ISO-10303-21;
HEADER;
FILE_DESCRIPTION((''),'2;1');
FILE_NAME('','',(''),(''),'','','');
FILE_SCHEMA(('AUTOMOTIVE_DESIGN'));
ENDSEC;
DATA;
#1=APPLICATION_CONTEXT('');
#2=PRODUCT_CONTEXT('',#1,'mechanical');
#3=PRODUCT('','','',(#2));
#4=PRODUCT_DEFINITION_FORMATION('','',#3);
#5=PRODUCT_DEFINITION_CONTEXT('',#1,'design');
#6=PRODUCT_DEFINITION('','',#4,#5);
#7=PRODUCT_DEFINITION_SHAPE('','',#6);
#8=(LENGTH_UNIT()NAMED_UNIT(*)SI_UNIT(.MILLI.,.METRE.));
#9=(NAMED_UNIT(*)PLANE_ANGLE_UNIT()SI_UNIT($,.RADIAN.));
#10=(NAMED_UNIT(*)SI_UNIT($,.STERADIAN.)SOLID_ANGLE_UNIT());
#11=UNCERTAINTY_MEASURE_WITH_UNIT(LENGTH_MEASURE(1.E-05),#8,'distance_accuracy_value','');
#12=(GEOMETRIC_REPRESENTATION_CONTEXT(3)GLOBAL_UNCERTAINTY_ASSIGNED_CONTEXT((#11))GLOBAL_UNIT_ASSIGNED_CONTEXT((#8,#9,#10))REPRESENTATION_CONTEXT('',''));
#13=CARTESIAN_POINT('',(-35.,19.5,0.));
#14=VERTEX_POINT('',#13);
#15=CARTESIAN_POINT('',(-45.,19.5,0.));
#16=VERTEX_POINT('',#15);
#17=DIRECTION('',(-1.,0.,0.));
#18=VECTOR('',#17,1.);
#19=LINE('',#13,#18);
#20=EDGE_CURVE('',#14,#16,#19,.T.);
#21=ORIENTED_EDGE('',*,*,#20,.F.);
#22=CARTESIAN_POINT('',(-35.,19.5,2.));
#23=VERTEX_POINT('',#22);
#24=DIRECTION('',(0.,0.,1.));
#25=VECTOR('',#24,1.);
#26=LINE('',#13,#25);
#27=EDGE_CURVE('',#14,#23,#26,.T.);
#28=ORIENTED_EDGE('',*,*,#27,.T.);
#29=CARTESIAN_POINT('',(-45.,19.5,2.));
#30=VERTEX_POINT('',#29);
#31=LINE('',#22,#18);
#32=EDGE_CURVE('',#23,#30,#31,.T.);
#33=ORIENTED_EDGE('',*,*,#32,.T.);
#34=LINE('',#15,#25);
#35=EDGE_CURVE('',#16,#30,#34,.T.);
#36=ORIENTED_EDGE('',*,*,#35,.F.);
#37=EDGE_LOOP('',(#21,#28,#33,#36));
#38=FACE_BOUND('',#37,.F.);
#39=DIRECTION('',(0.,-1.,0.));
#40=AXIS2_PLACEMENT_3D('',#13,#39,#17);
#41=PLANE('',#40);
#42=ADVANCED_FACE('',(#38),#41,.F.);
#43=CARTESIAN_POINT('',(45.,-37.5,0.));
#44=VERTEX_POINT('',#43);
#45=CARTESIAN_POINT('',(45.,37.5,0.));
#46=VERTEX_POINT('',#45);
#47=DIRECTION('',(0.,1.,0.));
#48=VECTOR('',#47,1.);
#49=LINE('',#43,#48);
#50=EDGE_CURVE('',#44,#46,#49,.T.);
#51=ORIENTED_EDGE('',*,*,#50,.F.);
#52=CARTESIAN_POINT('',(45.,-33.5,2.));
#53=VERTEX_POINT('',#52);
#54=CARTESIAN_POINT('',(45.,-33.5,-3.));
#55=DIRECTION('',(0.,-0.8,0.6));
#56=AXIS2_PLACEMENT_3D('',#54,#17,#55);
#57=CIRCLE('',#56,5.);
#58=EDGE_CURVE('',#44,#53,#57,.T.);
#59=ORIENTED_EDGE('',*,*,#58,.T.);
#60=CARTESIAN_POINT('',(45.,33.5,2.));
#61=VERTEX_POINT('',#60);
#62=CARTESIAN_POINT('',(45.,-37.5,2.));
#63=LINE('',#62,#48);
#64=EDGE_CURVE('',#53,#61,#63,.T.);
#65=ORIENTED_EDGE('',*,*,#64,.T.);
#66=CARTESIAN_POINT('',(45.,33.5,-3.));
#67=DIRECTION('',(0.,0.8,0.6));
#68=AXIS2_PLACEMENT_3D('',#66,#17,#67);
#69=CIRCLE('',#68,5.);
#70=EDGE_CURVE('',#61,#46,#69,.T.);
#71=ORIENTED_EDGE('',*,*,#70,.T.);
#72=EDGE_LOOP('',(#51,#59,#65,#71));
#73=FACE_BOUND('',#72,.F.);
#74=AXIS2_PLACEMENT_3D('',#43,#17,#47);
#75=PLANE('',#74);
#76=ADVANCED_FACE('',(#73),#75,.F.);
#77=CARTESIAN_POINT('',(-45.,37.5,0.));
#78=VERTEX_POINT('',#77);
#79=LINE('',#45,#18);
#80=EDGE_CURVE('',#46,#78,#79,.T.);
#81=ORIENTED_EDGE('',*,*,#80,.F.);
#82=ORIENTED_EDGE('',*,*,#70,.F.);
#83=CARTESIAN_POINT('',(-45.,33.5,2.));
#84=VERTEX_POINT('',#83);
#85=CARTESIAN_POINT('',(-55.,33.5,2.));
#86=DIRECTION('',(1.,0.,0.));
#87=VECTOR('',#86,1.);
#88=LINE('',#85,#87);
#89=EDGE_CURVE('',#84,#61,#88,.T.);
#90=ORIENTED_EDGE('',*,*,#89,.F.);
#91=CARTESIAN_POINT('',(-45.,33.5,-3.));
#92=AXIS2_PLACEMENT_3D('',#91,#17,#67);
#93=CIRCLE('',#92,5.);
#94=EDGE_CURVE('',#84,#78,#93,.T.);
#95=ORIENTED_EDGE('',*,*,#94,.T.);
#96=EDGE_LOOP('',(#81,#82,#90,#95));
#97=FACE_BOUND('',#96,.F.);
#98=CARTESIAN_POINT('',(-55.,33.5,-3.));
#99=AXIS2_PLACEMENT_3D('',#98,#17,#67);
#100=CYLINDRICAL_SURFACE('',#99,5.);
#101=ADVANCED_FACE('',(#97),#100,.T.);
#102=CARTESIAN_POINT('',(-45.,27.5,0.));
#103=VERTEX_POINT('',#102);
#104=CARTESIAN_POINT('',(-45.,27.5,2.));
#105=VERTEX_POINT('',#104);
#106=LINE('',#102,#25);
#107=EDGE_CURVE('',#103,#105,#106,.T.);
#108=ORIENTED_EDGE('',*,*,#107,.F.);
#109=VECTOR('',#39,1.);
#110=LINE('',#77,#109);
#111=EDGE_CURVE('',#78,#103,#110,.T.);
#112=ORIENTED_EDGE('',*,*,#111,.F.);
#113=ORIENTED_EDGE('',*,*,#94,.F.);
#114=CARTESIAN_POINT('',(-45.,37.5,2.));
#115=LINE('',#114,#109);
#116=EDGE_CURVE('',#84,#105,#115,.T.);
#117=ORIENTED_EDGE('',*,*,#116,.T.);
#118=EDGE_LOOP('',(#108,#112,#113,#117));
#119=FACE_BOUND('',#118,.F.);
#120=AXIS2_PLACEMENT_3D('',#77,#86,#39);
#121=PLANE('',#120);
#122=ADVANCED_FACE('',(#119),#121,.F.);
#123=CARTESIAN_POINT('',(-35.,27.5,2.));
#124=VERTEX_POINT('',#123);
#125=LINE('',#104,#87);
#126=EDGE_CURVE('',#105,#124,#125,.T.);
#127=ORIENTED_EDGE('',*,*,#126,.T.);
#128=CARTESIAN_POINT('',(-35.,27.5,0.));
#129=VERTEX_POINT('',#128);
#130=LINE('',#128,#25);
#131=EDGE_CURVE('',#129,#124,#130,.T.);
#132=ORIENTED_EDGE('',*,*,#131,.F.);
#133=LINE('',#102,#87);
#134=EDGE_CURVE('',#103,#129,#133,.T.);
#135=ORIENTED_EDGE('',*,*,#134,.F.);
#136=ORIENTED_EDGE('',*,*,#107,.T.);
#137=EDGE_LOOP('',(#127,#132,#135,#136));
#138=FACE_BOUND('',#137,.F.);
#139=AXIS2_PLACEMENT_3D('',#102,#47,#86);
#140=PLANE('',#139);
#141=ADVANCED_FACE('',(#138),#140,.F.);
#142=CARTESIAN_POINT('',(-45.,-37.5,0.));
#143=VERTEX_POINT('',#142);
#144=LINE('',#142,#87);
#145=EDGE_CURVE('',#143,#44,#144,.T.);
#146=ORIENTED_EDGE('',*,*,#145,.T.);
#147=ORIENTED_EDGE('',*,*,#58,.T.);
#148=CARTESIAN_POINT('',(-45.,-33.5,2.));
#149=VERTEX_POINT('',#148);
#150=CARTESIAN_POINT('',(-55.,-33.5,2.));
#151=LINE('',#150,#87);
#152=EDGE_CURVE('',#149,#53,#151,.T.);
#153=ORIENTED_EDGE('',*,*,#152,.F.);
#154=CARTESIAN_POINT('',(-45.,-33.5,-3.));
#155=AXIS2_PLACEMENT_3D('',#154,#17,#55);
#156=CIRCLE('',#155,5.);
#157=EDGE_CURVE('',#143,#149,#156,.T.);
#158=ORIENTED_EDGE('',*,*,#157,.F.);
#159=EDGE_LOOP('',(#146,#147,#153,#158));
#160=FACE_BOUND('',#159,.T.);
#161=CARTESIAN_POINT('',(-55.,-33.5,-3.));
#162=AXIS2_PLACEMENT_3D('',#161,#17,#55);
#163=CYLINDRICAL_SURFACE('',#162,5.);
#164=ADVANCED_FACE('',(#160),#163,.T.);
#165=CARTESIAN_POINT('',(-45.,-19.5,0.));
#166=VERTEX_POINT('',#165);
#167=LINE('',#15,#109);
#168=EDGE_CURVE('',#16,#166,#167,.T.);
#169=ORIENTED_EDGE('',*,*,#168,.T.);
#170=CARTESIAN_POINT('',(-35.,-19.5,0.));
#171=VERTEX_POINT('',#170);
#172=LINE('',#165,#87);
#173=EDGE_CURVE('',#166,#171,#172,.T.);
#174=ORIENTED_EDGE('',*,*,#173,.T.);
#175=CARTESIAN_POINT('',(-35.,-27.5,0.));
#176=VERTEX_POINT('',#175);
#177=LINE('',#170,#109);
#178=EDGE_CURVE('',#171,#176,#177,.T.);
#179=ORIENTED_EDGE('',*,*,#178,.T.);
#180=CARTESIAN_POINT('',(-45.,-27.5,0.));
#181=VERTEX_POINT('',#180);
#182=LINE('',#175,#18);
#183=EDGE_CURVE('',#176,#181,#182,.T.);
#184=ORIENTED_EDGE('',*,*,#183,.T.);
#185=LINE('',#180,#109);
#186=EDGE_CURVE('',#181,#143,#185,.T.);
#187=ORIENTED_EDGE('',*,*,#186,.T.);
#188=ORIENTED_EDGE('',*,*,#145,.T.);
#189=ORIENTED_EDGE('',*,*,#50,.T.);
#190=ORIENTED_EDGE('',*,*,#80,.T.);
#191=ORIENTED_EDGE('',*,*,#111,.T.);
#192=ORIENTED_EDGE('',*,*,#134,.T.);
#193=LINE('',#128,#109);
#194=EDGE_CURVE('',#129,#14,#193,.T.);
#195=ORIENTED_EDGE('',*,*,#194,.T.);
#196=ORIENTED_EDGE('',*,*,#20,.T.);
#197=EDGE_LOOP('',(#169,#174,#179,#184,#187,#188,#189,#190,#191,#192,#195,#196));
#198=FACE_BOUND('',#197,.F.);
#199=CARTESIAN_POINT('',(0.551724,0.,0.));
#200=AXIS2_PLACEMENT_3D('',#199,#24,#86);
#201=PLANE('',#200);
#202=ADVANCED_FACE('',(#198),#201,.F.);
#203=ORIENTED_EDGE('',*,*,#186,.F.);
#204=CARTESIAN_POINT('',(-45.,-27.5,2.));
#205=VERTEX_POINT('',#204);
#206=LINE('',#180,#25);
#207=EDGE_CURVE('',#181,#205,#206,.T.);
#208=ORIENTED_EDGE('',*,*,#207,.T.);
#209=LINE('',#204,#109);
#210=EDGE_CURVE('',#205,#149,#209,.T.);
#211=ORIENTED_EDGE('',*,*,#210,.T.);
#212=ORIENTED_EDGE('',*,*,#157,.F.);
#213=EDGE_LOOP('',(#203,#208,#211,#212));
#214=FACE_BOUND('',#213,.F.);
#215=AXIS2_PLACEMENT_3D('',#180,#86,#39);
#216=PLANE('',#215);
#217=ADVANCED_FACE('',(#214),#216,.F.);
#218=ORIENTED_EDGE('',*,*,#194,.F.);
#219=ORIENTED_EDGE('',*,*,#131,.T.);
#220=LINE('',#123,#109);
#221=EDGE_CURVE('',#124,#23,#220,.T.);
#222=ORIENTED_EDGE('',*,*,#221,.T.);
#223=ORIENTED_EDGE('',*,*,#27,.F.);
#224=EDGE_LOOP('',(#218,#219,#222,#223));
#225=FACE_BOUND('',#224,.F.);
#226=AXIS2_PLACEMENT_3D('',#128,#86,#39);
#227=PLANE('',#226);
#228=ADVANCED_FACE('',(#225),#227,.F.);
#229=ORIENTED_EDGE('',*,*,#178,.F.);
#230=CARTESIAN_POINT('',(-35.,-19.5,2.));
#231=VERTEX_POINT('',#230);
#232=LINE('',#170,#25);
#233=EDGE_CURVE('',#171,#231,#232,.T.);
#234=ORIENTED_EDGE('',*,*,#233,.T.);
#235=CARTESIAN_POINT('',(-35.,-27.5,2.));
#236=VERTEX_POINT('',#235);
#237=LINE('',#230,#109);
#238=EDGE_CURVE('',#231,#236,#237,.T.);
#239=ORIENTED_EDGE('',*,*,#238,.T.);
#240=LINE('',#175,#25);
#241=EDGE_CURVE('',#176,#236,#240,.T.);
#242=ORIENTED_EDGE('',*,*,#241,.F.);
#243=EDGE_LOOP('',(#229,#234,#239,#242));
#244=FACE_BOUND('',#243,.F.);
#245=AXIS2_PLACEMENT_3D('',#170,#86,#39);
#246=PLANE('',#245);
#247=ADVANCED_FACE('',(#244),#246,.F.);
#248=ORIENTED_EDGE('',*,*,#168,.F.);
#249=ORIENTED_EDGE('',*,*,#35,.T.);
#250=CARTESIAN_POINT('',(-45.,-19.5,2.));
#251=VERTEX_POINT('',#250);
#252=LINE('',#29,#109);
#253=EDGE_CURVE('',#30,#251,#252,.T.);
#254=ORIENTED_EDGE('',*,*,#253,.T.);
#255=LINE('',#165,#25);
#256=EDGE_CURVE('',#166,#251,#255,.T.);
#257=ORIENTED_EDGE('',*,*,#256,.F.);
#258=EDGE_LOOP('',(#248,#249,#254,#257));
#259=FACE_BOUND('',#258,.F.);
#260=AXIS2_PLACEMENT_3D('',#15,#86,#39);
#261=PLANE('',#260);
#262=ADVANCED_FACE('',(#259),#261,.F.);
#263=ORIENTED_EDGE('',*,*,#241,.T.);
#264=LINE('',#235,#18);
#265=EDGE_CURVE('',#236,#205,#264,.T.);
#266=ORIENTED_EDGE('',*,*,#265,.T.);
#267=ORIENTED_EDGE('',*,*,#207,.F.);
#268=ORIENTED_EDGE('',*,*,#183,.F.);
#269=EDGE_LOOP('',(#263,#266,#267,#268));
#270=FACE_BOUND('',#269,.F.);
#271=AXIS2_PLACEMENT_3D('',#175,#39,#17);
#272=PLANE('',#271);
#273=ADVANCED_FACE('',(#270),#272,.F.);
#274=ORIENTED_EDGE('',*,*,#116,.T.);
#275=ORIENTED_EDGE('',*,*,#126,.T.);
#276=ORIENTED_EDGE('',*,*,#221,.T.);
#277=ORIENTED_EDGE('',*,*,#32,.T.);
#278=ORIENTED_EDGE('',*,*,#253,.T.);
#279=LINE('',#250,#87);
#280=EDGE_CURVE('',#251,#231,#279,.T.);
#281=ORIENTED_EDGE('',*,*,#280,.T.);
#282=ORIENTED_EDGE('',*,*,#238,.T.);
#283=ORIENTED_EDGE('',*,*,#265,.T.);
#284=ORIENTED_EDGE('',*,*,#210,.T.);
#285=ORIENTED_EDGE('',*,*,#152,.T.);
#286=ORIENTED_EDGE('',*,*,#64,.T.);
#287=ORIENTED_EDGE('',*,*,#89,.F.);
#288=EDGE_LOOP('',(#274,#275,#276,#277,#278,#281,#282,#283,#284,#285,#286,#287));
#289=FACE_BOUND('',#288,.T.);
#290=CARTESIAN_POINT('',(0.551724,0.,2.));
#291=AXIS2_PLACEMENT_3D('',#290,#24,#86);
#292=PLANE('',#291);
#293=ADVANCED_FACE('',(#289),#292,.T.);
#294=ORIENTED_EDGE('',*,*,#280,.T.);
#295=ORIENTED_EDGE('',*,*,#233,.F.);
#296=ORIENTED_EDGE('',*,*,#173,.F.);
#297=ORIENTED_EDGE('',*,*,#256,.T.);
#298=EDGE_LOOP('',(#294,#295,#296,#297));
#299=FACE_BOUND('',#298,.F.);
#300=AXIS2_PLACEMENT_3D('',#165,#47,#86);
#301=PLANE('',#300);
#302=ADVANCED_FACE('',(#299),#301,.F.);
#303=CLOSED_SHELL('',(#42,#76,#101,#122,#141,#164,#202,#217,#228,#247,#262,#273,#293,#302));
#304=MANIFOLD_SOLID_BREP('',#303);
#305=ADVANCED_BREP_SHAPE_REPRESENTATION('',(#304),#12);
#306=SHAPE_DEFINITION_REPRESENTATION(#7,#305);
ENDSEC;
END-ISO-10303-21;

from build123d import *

# Parameters (mm, degrees)
F1_DEPTH    = 2
F2_T1_DEPTH = 110


# Not quite as in the source:
# - a fillet or chamfer that OpenCascade refuses, or shapes differently, is made with other operations: its cross-section is extruded or revolved along the edge and cut away or added


with BuildPart() as f1:
    # F0 (on Top) → F1 (new body)
    with BuildSketch(Plane.XY):
        Polygon((45, 27.5), (-35, 27.5), (-35, 19.5), (-45, 19.5), (-45, -19.5), (-35, -19.5), (-35, -27.5), (45, -27.5), align=None)
        Polygon((-45, 37.5), (-45, 27.5), (-35, 27.5), (45, 27.5), (45, 37.5), align=None)
        Polygon((45, -37.5), (45, -27.5), (-35, -27.5), (-45, -27.5), (-45, -37.5), align=None)
    extrude(amount=F1_DEPTH)

    # F2: fillet of radius 5 on 2 edges, made by hand

    # F2_s2 → F2_t1 (cut)
    with BuildSketch(Plane.YZ.offset(-55)):
        with BuildLine():
            ThreePointArc((37.5, 0), (35.7360679775, 1.472135955), (33.5, 2))
            Line((33.5, 2), (37.5, 2))
            Line((37.5, 2), (37.5, 0))
        make_face()
        with BuildLine():
            ThreePointArc((-37.5, 0), (-35.7360679775, 1.472135955), (-33.5, 2))
            Line((-33.5, 2), (-37.5, 2))
            Line((-37.5, 2), (-37.5, 0))
        make_face()
    extrude(amount=F2_T1_DEPTH, mode=Mode.SUBTRACT)


solid = f1.part
